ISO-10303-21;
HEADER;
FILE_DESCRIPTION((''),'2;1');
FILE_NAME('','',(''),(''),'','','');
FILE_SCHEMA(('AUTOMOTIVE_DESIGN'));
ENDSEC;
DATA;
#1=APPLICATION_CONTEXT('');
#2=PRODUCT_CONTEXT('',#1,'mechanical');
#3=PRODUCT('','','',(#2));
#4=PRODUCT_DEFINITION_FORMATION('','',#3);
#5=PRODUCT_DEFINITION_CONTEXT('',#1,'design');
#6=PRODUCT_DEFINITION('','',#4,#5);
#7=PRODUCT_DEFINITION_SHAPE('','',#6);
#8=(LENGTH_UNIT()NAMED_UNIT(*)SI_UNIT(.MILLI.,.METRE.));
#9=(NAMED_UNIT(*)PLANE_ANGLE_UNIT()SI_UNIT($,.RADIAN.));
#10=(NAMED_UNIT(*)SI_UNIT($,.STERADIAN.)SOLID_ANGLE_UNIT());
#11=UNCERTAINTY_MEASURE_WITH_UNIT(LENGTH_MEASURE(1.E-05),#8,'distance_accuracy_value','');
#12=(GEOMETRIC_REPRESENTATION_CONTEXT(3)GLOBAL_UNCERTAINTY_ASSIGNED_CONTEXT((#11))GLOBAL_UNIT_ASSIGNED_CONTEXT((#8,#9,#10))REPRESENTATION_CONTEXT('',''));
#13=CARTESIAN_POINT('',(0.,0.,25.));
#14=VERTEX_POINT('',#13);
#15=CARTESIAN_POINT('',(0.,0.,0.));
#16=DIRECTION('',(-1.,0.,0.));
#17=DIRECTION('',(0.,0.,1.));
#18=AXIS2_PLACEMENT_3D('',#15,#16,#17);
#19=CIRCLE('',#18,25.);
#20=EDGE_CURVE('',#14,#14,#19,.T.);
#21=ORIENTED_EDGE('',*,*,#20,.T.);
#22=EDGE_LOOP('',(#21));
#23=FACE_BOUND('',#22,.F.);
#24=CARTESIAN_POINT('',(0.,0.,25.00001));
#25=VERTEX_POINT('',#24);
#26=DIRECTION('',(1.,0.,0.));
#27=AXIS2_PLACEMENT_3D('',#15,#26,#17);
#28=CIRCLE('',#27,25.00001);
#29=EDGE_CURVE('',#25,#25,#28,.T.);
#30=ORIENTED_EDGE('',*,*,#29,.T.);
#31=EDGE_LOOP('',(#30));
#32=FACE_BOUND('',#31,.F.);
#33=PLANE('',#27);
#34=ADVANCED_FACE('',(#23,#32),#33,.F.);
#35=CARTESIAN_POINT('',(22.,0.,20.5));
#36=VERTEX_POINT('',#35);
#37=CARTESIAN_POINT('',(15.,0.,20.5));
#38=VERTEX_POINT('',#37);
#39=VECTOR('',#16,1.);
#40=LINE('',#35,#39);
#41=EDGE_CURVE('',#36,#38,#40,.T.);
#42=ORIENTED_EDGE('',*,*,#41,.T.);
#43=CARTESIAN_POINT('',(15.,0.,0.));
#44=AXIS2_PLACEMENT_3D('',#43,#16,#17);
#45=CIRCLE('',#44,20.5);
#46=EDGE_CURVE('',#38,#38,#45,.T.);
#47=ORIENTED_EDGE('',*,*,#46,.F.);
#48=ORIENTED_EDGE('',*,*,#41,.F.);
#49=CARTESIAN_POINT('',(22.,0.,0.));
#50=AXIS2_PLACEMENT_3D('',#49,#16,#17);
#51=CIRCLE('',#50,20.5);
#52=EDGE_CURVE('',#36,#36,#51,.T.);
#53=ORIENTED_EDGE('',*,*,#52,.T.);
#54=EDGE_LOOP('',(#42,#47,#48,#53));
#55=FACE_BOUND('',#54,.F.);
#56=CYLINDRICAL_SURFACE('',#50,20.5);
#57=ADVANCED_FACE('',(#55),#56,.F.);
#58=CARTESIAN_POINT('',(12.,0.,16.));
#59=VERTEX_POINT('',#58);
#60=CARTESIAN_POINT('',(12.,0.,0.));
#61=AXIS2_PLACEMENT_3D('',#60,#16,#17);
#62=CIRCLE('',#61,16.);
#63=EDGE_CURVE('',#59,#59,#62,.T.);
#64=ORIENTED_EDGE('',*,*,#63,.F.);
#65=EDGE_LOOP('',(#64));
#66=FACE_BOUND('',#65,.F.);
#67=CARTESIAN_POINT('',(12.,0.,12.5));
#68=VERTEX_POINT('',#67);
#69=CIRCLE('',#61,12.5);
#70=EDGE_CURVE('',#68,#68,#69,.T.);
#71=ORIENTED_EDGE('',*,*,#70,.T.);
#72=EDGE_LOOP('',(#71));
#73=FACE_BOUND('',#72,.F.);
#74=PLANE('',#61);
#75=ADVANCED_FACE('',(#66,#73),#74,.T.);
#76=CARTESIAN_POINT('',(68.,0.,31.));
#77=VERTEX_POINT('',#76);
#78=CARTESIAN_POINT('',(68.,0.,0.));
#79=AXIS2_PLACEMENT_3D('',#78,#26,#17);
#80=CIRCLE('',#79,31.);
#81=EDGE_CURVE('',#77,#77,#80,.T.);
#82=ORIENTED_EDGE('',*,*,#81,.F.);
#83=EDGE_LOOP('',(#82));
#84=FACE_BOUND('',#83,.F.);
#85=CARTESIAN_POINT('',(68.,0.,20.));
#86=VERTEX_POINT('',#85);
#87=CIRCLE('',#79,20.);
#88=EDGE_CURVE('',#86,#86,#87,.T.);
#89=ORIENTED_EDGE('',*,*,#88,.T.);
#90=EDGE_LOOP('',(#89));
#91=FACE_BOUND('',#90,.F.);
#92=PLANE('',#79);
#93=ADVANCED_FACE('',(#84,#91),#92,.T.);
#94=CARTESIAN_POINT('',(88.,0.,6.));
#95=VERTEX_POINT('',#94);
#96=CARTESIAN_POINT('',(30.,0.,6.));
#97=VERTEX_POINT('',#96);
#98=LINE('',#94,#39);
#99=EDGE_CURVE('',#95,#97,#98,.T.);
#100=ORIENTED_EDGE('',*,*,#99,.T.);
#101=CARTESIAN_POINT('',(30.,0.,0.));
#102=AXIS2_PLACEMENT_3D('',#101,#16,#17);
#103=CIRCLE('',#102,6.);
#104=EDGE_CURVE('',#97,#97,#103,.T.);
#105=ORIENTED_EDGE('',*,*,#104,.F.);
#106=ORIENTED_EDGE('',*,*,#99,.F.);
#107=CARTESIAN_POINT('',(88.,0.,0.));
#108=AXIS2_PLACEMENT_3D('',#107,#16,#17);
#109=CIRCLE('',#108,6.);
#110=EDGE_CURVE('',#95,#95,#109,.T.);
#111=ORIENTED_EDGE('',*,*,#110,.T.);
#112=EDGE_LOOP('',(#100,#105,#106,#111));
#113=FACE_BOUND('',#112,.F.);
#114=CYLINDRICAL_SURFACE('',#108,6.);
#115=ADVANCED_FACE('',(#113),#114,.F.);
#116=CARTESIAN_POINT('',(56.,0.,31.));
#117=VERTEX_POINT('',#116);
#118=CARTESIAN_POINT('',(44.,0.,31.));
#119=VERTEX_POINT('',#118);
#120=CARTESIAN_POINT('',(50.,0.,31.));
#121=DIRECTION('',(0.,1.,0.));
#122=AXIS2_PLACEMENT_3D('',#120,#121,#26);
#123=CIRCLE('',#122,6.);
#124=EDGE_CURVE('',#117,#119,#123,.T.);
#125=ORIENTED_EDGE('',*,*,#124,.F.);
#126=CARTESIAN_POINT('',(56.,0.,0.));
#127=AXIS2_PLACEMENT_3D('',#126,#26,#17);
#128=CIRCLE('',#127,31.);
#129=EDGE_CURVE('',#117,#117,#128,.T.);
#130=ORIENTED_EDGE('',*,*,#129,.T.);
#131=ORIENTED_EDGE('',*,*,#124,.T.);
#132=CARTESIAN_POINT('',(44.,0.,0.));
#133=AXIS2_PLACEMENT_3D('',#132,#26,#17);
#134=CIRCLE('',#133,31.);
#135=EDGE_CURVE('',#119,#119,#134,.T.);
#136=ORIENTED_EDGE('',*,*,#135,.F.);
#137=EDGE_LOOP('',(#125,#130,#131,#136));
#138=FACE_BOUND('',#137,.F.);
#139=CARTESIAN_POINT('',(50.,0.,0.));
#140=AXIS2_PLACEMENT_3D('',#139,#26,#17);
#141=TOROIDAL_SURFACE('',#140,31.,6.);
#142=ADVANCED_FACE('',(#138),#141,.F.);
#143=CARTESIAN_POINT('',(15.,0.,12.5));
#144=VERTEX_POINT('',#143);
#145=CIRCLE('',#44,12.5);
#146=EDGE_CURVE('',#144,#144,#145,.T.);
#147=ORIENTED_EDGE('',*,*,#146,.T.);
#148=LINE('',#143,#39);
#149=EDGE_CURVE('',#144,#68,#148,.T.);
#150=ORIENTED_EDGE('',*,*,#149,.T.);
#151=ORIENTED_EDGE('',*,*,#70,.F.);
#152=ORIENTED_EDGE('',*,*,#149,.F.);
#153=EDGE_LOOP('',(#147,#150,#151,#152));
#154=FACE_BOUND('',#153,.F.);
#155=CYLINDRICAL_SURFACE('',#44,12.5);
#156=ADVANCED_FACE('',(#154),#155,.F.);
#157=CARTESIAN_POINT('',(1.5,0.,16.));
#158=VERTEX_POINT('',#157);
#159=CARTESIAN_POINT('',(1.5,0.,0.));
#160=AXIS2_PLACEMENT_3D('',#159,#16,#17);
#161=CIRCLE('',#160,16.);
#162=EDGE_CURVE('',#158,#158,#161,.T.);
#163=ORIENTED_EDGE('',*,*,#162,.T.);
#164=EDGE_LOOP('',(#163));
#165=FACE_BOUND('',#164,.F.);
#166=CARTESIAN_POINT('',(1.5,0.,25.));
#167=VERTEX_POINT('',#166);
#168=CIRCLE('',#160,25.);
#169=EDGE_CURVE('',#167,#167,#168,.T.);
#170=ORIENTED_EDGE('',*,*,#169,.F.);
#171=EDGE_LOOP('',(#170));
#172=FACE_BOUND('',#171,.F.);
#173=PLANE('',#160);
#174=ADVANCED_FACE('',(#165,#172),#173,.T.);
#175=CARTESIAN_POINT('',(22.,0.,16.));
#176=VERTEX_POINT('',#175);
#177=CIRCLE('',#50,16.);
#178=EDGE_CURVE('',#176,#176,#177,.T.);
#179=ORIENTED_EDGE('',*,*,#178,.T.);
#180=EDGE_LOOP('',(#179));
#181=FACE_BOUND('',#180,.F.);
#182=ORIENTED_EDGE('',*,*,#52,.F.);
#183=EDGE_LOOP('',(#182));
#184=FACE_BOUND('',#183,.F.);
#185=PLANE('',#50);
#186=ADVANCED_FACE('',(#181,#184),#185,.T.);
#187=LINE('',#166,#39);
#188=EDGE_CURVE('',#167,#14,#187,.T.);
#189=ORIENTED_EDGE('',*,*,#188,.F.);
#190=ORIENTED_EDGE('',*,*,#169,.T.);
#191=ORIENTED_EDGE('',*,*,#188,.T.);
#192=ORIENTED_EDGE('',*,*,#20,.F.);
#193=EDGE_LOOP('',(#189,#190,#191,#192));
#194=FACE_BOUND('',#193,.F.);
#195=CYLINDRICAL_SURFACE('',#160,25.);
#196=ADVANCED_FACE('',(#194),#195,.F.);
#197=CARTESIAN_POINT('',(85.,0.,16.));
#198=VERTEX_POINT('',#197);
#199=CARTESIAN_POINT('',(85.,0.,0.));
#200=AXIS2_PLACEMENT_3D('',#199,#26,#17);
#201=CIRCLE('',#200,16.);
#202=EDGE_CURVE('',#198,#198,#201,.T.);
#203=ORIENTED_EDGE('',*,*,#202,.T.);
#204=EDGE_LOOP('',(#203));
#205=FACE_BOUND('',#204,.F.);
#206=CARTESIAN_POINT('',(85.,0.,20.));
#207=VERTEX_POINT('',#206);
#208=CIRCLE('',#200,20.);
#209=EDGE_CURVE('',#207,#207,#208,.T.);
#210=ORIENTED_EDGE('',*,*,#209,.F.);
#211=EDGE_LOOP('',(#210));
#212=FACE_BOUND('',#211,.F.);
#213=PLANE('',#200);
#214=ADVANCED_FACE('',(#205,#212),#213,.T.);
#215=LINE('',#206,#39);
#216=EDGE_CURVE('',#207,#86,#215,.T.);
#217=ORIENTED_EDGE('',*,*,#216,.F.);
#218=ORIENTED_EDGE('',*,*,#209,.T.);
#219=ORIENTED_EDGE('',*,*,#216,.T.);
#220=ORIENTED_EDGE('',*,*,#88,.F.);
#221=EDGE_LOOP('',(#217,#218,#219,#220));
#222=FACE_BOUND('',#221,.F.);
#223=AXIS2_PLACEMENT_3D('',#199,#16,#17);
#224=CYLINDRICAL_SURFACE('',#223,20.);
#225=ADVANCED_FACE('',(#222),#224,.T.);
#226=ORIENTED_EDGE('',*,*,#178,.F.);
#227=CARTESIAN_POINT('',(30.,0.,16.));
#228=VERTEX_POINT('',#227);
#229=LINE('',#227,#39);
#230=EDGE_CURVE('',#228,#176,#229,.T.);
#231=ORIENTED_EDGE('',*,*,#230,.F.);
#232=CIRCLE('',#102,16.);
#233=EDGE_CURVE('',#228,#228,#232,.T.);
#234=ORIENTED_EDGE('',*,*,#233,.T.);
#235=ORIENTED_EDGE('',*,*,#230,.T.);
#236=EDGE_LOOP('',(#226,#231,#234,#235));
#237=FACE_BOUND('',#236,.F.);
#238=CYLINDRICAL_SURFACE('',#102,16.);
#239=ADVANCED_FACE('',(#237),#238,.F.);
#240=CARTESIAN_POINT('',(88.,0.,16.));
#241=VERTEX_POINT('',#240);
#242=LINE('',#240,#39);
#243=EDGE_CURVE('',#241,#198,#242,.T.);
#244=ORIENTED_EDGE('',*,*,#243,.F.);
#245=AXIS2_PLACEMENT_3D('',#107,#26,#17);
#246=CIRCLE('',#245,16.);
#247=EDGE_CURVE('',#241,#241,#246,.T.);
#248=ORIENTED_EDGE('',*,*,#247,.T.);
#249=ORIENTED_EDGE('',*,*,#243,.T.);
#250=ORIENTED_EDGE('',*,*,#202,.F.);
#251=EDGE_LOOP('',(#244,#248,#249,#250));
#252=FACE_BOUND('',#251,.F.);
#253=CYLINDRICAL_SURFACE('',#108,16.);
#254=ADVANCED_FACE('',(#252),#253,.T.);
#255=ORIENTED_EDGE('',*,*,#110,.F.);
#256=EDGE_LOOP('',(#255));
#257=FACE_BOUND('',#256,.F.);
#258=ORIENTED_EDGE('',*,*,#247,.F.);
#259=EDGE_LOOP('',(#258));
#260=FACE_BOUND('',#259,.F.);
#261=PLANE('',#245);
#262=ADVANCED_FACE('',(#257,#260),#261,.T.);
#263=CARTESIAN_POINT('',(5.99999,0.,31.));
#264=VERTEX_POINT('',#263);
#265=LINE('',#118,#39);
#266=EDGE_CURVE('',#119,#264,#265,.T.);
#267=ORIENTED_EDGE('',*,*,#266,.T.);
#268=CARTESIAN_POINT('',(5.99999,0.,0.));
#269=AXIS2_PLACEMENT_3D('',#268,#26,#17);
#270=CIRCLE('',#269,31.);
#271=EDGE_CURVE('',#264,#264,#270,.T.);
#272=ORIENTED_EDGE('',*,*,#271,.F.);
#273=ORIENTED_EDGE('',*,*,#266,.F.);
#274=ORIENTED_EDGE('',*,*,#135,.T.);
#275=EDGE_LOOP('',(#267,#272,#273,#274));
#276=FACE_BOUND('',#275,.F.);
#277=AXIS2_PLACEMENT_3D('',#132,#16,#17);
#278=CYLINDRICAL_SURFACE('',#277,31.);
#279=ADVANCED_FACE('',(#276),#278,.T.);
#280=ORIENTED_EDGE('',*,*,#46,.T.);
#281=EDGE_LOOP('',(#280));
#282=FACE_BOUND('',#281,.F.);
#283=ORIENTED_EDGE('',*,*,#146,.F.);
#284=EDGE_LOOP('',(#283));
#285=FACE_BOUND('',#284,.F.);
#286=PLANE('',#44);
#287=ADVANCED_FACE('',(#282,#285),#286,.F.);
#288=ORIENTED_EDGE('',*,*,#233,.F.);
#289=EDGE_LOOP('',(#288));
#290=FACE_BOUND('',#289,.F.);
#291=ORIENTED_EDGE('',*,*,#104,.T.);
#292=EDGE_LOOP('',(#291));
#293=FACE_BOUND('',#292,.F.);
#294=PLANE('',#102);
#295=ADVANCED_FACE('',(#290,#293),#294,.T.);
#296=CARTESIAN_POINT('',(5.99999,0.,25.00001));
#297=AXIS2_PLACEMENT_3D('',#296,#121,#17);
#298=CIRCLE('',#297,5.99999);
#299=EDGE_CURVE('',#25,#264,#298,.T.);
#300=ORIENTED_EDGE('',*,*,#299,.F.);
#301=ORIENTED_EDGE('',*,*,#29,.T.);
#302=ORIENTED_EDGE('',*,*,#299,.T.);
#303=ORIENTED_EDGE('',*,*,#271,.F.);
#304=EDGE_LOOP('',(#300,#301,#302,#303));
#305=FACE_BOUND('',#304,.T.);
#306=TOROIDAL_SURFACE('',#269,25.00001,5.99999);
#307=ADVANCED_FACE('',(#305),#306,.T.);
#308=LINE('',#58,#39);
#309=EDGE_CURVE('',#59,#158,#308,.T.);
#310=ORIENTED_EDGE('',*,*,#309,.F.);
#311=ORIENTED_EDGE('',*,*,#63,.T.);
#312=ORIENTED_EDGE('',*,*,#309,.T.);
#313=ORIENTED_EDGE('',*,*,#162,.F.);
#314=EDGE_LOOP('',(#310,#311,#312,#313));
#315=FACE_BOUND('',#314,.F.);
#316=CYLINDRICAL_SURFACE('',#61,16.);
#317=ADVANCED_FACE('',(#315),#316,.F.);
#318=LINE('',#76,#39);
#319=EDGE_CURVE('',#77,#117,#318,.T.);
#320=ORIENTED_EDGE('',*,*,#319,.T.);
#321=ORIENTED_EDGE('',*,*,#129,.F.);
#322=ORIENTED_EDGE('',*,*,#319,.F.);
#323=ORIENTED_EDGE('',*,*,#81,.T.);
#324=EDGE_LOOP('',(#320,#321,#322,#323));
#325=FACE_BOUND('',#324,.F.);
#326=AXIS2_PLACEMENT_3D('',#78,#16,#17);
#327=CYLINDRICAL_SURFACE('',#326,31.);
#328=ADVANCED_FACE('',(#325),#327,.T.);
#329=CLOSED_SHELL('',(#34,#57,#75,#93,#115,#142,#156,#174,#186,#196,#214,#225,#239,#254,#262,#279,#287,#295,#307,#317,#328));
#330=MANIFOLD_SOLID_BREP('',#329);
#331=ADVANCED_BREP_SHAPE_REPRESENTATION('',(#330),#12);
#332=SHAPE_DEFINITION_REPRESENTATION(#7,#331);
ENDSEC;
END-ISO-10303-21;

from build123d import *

# Parameters (mm, degrees)
F4_R = 5.99999


# Not quite as in the source:
# - a fillet or chamfer is up to 0.001 mm smaller than in the source, because OpenCascade refuses the exact size


with BuildPart() as f1:
    # F0 (on Front) → F1 (revolve)
    with BuildSketch(Plane.XZ):
        with BuildLine():
            Line((0, 31), (0, 0))
            Line((0, 0), (88, 0))
            Line((88, 0), (88, 16))
            Line((88, 16), (85, 16))
            Line((85, 16), (85, 20))
            Line((85, 20), (68, 20))
            Line((68, 20), (68, 31))
            Line((68, 31), (56, 31))
            ThreePointArc((56, 31), (50, 25), (44, 31))
            Line((44, 31), (0, 31))
        make_face()
    revolve(axis=Axis((55.6183233857, 0, 0), (1, 0, 0)))

    # F2 (on Front) → F3 (revolve, cut)
    with BuildSketch(Plane.XZ):
        Polygon((0, 25), (0, 0), (88, 0), (88, 6), (30, 6), (30, 16), (22, 16), (22, 20.5), (15, 20.5), (15, 12.5), (12, 12.5), (12, 16), (1.5, 16), (1.5, 25), align=None)
    revolve(axis=Axis((-12.6493745584, 0, 0), (-1, 0, 0)), mode=Mode.SUBTRACT)

    # F4 (radius 6 in the source; OpenCascade refuses exactly that, so slightly less here)
    f4_edges = [f1.edges().sort_by_distance(p)[0] for p in [
        (0, 0, -31),
    ]]
    fillet(f4_edges, radius=F4_R)


solid = f1.part
